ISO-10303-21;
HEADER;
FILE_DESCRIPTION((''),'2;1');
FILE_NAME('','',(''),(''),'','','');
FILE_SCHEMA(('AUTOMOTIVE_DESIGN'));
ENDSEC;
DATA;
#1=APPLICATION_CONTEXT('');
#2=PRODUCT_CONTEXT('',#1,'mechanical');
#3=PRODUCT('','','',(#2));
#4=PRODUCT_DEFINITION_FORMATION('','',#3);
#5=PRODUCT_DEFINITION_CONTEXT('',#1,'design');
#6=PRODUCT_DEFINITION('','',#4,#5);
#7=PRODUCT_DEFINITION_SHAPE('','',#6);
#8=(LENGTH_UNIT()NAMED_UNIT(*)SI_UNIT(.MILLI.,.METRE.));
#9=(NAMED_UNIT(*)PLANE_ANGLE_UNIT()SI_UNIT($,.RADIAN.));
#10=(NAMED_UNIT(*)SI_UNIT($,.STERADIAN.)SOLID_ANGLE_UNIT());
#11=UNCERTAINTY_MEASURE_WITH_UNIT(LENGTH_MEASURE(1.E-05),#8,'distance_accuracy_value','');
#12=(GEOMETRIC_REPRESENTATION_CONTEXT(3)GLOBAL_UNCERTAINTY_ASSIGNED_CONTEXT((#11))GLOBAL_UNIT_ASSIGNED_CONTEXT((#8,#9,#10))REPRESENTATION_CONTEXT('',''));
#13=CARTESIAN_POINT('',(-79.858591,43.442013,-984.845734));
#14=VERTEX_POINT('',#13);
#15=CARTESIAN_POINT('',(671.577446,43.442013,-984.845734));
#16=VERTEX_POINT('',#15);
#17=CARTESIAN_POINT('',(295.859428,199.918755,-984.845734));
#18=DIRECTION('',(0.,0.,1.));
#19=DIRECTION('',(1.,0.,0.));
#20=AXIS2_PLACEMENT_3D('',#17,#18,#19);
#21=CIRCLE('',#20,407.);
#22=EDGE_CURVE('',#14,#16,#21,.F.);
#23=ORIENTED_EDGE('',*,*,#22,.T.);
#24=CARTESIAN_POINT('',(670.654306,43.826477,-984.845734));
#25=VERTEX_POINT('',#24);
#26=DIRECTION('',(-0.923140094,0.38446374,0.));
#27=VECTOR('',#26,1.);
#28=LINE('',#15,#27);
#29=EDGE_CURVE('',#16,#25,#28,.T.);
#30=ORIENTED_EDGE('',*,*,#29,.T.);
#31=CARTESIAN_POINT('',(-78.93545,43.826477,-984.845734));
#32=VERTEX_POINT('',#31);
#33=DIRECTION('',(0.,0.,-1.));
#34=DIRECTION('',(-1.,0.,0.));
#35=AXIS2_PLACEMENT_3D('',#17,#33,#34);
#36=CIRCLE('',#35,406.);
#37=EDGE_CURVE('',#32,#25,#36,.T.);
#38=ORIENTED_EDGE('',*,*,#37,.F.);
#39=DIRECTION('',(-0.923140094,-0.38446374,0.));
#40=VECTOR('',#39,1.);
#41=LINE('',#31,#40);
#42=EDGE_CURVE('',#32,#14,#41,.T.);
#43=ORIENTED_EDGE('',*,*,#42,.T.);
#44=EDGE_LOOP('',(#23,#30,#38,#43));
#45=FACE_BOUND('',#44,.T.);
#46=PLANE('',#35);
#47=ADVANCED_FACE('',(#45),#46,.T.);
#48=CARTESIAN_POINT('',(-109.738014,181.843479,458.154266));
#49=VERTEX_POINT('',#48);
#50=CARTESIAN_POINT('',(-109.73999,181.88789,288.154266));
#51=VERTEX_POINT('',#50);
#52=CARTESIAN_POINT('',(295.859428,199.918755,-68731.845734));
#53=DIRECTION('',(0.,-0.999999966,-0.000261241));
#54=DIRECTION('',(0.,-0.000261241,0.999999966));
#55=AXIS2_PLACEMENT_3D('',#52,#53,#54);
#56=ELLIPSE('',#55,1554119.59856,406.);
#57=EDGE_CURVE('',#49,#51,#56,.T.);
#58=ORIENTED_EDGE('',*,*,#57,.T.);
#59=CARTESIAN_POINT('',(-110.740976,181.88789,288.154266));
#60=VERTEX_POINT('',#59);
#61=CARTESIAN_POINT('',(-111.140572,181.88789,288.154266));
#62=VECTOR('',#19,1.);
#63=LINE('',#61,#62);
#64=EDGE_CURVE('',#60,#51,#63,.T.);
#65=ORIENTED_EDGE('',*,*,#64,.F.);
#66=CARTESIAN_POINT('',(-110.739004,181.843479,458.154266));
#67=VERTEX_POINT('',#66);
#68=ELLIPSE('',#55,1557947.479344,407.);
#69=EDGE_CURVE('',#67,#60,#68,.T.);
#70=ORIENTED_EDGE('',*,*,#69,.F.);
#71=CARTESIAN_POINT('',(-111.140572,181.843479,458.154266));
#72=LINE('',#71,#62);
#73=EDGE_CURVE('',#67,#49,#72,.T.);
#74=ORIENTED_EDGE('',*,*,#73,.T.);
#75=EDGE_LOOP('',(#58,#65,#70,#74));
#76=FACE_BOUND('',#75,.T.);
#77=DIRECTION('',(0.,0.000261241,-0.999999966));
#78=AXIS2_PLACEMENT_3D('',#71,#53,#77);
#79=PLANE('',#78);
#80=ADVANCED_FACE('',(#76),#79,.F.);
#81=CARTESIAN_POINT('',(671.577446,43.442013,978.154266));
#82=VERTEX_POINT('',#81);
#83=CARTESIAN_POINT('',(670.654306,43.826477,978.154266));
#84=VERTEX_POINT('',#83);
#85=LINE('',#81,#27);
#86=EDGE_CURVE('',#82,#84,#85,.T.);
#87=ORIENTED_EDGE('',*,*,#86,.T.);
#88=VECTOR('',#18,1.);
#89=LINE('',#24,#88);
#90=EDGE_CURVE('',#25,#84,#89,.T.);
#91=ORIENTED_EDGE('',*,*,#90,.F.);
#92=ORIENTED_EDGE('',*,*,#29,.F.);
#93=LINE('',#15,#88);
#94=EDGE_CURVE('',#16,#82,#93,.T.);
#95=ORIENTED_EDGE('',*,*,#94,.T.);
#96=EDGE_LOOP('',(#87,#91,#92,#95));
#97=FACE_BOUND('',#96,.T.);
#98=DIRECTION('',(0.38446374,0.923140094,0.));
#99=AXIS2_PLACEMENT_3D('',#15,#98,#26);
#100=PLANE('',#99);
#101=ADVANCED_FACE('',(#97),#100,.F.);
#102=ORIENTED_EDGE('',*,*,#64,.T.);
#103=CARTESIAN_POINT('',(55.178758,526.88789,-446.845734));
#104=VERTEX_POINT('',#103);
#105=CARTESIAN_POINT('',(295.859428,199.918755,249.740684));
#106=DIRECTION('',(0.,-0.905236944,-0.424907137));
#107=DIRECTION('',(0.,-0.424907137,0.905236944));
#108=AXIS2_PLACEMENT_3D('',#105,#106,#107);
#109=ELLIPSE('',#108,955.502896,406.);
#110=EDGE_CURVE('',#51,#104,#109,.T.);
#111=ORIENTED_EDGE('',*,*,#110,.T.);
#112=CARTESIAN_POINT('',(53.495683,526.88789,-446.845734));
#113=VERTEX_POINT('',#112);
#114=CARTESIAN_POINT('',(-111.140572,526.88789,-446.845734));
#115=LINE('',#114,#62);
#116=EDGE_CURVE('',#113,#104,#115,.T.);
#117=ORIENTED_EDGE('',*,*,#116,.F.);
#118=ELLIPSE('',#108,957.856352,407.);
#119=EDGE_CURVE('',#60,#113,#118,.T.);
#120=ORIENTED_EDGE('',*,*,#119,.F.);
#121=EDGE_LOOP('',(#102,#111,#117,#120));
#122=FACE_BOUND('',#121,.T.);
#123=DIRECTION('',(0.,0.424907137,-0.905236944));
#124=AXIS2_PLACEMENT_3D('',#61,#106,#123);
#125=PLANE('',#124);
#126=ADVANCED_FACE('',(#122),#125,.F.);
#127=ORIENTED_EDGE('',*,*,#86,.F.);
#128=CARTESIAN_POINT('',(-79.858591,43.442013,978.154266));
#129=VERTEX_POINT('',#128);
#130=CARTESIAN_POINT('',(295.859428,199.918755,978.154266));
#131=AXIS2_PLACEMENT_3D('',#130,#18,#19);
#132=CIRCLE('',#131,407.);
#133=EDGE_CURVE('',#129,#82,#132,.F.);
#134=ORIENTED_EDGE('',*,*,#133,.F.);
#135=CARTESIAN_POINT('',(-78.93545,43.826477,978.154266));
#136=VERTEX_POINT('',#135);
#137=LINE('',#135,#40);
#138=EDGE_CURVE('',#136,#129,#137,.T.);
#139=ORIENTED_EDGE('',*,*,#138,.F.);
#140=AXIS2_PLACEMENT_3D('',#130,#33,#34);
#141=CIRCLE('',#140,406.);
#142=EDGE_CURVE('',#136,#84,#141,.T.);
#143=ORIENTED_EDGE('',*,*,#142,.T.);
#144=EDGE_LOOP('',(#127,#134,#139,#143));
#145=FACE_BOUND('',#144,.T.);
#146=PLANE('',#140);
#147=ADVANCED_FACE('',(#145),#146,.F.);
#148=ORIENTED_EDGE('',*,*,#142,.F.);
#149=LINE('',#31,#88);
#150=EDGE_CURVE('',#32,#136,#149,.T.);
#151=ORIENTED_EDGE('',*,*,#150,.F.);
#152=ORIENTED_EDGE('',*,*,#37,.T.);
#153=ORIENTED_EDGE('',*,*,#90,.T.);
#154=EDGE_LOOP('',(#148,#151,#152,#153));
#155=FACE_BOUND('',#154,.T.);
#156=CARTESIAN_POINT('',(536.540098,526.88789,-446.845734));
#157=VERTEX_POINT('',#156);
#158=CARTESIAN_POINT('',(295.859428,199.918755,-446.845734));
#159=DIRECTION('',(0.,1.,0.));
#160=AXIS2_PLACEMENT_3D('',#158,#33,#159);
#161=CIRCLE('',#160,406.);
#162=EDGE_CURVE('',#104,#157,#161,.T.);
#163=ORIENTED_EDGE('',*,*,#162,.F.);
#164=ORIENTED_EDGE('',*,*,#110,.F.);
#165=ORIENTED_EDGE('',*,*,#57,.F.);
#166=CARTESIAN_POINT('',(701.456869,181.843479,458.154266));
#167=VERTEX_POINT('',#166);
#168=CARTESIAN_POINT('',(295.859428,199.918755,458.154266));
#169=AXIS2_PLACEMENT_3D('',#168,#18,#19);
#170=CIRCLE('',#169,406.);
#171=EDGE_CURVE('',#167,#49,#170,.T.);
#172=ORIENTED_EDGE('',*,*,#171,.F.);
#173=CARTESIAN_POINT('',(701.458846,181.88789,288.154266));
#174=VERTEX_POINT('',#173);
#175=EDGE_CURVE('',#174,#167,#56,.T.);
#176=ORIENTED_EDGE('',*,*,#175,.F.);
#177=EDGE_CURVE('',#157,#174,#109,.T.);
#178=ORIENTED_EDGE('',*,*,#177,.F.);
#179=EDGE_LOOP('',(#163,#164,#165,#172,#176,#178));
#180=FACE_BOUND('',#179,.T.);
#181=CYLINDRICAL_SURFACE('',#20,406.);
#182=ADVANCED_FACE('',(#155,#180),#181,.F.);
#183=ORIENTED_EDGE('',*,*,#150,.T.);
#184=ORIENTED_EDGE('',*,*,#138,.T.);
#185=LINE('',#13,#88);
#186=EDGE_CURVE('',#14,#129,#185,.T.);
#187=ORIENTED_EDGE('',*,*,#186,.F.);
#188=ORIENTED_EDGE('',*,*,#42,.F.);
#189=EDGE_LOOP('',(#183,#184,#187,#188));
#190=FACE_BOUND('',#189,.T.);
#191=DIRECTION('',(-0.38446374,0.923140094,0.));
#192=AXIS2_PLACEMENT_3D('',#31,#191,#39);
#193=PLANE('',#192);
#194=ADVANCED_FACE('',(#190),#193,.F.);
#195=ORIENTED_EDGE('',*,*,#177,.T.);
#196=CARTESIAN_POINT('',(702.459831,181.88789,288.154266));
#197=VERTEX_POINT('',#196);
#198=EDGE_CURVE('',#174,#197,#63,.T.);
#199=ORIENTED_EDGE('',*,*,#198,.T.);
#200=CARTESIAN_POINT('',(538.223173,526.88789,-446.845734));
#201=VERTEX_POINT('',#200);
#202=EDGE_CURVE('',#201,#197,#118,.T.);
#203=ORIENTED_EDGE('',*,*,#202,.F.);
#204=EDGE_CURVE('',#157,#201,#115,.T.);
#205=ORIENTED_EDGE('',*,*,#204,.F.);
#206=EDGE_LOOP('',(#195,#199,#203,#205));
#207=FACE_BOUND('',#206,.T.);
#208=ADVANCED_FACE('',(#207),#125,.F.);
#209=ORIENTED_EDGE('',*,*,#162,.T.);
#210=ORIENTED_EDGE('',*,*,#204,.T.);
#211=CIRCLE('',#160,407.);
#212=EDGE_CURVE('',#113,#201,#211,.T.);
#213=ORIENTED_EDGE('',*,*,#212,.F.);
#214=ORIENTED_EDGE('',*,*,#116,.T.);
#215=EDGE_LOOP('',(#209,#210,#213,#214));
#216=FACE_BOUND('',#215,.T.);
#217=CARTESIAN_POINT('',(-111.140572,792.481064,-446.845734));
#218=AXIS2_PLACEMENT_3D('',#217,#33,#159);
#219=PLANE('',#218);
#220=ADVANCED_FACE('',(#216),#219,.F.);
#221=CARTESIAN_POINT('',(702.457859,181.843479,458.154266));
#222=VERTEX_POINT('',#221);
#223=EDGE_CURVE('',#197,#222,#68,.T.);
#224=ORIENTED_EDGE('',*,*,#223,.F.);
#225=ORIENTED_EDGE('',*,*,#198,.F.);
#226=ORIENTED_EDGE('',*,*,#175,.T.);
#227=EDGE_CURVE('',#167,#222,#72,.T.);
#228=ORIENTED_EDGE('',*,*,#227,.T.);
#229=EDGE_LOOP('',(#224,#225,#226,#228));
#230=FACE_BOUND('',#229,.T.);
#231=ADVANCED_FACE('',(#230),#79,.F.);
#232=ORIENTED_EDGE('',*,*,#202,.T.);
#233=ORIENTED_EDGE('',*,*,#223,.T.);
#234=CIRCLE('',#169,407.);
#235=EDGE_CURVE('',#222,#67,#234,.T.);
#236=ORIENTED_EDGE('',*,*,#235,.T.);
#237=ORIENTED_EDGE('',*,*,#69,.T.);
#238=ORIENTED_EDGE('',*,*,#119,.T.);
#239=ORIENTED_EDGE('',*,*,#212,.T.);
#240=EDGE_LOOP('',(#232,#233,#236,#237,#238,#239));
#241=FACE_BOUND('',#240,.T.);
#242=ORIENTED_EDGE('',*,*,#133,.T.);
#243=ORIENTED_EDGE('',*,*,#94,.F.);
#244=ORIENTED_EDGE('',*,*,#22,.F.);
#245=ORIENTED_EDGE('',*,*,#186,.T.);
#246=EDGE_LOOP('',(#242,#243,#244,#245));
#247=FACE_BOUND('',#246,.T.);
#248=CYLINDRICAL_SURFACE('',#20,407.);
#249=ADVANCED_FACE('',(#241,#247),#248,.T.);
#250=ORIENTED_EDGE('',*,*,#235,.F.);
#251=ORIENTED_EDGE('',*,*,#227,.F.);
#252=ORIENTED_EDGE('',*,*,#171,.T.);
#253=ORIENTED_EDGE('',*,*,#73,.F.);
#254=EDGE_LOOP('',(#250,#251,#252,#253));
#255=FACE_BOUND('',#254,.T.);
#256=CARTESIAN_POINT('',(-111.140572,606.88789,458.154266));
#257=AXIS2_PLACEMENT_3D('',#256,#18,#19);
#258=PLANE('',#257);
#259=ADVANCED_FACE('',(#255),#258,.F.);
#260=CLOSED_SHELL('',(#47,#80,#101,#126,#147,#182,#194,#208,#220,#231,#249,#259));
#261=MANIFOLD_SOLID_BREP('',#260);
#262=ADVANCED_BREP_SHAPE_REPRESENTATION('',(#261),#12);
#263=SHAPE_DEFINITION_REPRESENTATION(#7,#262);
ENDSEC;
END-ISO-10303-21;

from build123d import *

# Parameters (mm, degrees)
SM_BASE_FLANGE_1_DEPTH   = 1963
CUT_EXTRUDE_1_DEPTH      = 2056.095688695
CUT_EXTRUDE_1_DEPTH_BACK = 2056.095688695


# Sheet-metal steps are written as plain solids
with BuildPart() as part:
    # Sketch 1 → Базовая кромка1 (new body)
    with BuildSketch(Plane.XY.offset(978.154266119)):
        with BuildLine():
            ThreePointArc((-78.935450432, 43.826476967), (295.859427587, 605.918755478), (670.654305605, 43.826476967))
            Line((670.654305605, 43.826476967), (671.577445699, 43.442013227))
            ThreePointArc((671.577445699, 43.442013227), (295.859427587, 606.918755478), (-79.858590526, 43.442013227))
            Line((-79.858590526, 43.442013227), (-78.935450432, 43.826476967))
        make_face()
    extrude(amount=-SM_BASE_FLANGE_1_DEPTH)

    # Эскиз6 → Вырез-Вытянуть1 (cut, two sides: drawn at the far end of the back side and taken through both)
    with BuildSketch(Plane(origin=(295.859427587, 199.918755478, 988), x_dir=(0, 0, -1), z_dir=(1, 0, 0)).offset(-CUT_EXTRUDE_1_DEPTH_BACK)):
        Polygon((529.845733881, 406.969134819), (529.845733881, -18.075276179), (699.845733881, -18.030865181), (1434.845733881, 326.969134819), (1434.845733881, 406.969134819), (1434.845733881, 592.56230864), (529.845733881, 592.56230864), align=None)
    extrude(amount=CUT_EXTRUDE_1_DEPTH + CUT_EXTRUDE_1_DEPTH_BACK, mode=Mode.SUBTRACT)


solid = part.part
